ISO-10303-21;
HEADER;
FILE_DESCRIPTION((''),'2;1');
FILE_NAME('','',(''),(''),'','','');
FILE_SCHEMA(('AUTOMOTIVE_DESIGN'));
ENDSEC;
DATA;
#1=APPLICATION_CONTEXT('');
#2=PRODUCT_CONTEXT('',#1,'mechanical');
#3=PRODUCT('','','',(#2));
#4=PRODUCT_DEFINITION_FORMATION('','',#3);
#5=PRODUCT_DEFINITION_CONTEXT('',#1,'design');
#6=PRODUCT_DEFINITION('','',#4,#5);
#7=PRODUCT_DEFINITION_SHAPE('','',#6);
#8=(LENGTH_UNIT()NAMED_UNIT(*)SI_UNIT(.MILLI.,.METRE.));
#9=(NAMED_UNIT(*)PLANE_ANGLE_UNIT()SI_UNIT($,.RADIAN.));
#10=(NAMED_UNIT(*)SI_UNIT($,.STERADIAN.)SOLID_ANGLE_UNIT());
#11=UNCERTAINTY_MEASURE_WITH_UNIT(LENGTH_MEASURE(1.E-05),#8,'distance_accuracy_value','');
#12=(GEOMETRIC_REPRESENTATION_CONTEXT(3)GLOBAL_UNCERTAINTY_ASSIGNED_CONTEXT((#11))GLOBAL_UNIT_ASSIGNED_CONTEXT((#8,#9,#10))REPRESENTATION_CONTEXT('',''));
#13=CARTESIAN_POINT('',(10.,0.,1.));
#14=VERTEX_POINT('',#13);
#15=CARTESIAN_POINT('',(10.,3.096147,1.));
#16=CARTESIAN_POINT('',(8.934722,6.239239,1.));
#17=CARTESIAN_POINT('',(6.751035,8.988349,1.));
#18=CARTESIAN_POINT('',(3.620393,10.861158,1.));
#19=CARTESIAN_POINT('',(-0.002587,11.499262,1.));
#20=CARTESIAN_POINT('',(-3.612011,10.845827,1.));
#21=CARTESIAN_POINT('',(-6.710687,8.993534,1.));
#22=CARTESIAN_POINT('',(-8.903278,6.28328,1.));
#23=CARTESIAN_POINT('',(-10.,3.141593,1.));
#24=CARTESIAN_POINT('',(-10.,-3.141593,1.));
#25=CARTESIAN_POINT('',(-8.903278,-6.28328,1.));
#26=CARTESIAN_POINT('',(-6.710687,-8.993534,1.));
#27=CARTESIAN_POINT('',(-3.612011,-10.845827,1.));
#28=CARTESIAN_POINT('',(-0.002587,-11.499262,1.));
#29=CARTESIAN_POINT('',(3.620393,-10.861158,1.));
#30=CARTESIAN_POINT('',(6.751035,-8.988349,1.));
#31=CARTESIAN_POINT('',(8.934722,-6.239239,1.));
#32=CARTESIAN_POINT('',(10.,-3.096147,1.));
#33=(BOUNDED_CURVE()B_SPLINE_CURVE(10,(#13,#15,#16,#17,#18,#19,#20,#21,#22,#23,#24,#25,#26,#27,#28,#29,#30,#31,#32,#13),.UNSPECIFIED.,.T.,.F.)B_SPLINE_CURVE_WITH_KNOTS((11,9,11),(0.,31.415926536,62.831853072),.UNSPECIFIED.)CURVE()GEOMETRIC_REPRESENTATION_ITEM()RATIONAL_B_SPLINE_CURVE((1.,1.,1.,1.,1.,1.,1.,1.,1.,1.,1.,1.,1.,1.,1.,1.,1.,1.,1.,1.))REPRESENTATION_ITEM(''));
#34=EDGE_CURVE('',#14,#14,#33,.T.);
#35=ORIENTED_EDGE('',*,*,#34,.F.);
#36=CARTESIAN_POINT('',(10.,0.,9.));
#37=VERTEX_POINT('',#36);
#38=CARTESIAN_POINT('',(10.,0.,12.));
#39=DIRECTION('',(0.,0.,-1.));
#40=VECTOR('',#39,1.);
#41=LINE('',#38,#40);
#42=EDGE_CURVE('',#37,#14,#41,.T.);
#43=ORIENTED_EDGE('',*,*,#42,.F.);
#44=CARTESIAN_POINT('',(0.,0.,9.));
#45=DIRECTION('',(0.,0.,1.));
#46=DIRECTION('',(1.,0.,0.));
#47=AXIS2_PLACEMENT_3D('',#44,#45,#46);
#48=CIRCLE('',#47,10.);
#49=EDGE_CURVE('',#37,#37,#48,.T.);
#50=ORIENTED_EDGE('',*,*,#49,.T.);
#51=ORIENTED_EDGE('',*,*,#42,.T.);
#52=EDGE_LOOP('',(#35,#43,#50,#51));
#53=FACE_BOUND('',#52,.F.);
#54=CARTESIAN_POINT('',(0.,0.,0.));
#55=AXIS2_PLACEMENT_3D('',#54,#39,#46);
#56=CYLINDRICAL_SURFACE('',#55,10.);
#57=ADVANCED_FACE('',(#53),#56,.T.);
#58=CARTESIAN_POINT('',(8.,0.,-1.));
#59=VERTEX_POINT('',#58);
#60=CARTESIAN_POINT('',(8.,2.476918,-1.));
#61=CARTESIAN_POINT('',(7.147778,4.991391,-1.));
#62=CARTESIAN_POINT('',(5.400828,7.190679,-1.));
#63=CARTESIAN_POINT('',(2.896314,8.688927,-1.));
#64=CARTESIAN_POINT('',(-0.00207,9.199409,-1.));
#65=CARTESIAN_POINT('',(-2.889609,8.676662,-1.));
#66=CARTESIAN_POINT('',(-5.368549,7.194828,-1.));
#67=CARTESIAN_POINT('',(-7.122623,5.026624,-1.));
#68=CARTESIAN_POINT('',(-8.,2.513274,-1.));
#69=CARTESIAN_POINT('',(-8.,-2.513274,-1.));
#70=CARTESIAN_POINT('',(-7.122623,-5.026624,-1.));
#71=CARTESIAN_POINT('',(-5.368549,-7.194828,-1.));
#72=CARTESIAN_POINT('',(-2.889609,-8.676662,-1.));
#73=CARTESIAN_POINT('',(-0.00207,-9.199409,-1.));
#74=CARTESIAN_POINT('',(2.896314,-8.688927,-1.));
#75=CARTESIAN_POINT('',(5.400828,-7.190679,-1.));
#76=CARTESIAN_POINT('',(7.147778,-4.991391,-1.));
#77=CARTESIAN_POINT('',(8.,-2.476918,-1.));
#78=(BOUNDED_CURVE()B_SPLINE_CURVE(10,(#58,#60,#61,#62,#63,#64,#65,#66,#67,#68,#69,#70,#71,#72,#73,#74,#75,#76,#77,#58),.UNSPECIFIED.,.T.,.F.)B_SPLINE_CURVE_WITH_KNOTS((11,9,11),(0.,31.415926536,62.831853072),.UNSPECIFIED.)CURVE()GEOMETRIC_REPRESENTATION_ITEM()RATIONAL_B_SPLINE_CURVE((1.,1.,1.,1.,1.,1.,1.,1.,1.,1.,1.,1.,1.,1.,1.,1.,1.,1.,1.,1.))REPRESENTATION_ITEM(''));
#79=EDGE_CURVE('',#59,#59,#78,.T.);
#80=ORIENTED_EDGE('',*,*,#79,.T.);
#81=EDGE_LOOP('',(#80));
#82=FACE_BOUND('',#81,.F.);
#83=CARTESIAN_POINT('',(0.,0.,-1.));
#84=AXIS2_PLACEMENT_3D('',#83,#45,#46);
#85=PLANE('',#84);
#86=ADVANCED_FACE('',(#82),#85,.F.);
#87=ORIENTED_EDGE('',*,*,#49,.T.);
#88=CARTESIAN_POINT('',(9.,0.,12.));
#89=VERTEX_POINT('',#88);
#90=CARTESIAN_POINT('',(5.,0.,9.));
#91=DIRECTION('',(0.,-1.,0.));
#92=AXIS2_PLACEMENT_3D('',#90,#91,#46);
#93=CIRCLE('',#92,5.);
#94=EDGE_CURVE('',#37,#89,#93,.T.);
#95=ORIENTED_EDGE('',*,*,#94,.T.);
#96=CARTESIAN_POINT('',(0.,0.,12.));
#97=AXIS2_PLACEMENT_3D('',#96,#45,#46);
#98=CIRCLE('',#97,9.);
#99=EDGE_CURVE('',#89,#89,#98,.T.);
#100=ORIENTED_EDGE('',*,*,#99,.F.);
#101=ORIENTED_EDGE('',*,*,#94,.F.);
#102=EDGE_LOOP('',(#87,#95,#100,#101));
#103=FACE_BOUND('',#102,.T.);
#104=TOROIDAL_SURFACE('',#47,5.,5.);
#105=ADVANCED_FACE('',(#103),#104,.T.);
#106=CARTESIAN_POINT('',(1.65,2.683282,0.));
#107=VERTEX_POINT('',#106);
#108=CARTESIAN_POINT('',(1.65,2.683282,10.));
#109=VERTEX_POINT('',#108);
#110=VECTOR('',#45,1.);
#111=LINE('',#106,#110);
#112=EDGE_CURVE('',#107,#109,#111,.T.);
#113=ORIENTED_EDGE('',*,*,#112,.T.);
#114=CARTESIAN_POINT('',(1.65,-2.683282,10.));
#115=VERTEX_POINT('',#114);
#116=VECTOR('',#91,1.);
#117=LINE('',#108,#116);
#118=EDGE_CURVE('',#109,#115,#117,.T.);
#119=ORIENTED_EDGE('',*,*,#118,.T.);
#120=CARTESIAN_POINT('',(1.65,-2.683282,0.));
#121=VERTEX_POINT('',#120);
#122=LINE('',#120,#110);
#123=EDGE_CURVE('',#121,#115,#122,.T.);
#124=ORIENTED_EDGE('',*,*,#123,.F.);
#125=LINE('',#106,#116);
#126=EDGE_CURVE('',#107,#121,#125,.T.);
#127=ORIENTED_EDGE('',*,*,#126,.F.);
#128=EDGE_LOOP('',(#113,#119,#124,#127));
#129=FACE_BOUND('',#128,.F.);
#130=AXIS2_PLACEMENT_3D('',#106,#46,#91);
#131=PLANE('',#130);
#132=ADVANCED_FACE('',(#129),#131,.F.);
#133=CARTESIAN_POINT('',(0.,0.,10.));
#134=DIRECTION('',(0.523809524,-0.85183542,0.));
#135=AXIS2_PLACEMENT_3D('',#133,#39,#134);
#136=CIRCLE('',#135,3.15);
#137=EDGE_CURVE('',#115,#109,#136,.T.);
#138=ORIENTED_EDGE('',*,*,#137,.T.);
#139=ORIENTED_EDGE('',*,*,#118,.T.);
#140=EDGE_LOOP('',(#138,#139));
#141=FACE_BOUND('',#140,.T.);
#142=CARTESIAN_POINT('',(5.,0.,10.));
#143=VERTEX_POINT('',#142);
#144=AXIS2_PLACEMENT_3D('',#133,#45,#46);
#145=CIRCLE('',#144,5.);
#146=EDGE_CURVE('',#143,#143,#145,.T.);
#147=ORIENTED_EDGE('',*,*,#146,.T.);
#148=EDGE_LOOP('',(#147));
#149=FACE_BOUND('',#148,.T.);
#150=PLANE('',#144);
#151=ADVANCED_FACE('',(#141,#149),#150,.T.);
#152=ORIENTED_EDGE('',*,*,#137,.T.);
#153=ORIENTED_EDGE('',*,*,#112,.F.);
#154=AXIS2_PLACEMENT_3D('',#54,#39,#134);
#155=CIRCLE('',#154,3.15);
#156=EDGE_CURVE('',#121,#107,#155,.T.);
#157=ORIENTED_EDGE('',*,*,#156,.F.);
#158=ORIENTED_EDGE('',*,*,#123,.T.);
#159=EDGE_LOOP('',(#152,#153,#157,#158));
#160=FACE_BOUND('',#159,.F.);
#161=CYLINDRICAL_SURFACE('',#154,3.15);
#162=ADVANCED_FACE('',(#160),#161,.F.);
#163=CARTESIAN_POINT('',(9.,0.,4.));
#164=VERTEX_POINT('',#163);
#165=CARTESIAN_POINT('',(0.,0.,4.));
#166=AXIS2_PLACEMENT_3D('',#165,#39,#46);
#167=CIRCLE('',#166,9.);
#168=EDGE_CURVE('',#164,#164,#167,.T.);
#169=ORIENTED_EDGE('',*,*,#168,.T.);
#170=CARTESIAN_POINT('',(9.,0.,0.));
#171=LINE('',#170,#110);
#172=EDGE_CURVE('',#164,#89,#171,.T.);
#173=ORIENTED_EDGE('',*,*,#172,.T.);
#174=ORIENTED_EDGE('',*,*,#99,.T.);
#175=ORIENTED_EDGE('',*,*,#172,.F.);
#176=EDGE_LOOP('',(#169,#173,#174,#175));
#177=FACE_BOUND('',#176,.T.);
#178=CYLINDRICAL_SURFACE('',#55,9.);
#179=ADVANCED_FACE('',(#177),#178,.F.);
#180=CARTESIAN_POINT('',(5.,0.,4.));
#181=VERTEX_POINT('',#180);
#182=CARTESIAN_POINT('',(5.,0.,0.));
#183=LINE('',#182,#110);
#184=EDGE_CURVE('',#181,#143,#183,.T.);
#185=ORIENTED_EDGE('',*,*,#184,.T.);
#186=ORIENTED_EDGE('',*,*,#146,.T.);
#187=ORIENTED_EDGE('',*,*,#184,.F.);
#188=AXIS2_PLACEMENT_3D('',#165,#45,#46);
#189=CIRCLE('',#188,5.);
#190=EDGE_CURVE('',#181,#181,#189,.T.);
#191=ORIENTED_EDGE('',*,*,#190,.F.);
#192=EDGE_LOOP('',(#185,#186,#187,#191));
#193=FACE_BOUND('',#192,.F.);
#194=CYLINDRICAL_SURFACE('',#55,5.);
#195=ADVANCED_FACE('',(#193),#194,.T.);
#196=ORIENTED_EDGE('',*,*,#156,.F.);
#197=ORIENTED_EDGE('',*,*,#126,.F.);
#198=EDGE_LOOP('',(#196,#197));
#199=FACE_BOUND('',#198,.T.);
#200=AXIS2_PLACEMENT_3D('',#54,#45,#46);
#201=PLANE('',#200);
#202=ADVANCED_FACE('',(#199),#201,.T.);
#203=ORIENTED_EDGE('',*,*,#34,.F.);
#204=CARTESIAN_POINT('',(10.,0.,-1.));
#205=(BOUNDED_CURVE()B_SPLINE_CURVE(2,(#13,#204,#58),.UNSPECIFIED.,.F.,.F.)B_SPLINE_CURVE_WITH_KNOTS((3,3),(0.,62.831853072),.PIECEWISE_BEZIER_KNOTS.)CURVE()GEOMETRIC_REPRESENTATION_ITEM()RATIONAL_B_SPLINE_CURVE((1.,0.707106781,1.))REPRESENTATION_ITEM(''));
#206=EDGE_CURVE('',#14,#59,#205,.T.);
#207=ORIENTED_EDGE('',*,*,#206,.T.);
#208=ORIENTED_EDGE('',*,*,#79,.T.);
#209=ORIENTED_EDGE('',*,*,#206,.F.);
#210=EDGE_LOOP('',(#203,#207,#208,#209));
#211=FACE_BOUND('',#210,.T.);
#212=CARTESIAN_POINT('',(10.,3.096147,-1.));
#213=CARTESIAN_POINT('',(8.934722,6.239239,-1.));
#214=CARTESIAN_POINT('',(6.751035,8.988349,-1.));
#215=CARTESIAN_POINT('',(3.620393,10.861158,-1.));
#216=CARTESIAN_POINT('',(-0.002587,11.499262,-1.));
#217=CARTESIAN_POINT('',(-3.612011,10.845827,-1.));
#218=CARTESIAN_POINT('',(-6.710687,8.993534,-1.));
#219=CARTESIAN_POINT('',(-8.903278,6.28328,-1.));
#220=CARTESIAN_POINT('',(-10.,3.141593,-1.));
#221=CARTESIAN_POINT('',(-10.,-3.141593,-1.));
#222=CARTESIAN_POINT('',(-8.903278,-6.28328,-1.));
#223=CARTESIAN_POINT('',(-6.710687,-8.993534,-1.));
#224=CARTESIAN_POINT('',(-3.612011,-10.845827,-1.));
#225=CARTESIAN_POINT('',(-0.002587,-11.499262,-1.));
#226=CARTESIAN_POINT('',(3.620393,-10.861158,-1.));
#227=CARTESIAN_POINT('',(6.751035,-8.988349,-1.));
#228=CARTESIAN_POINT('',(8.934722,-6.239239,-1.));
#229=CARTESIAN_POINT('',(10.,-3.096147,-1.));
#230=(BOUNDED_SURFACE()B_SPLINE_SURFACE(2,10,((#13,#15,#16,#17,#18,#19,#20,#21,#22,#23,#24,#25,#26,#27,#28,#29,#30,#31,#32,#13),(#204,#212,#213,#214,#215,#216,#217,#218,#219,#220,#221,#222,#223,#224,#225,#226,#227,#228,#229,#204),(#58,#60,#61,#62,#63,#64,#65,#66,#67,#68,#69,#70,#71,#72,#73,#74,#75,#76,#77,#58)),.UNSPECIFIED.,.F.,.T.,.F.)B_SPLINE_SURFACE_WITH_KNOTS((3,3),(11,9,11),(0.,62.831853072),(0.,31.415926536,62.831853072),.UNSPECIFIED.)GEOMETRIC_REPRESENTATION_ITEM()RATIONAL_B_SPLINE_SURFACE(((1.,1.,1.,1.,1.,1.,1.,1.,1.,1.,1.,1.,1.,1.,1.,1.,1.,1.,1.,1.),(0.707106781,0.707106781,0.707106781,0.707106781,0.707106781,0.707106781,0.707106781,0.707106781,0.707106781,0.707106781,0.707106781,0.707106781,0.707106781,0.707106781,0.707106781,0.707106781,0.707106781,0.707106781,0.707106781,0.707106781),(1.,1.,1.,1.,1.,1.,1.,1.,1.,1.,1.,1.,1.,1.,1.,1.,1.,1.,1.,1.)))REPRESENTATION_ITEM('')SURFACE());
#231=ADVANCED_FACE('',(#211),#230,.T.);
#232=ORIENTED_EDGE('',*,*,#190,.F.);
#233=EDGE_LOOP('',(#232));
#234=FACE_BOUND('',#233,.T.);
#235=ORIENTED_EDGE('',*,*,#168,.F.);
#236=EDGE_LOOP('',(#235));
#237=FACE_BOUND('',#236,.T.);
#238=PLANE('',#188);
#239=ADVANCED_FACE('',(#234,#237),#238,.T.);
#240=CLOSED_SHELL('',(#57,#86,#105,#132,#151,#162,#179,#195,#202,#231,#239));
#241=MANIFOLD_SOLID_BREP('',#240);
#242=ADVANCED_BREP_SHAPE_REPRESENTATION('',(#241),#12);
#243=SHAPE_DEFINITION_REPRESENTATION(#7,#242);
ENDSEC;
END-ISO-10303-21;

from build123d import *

# Parameters (mm, degrees)
F0_R     = 10
F0_R_2   = 5
F1_DEPTH = 4
F2_R     = 10
F2_R_2   = 9
F3_DEPTH = 12
F5_R     = 10
F6_DEPTH = 1
F7_R     = 2
F8_DEPTH = 10


# Not quite as in the source:
# - a fillet or chamfer that OpenCascade refuses, or shapes differently, is made with other operations: its cross-section is extruded or revolved along the edge and cut away or added


with BuildPart() as f1:
    # F0 (on Top) → F1 (new body)
    with BuildSketch(Plane.XY):
        Circle(F0_R)
        Circle(F0_R_2, mode=Mode.SUBTRACT)
    extrude(amount=F1_DEPTH)

    # F2 (on Top) → F3 (join)
    with BuildSketch(Plane.XY):
        Circle(F2_R)
        Circle(F2_R_2, mode=Mode.SUBTRACT)
    extrude(amount=F3_DEPTH)

    # F4: fillet of radius 5 on 1 edges, made by hand

    # F4_s1 → F4_t2 (revolve, cut)
    with BuildSketch(Plane.XZ):
        with BuildLine():
            ThreePointArc((10, 9), (9.7434164903, 10.5811388301), (9, 12))
            Line((9, 12), (10, 12))
            Line((10, 12), (10, 9))
        make_face()
    revolve(axis=Axis((0, 0, 12), (0, 0, 1)), mode=Mode.SUBTRACT)

    # F5 (on face) → F6 (join)
    with BuildSketch(Plane.XY):
        Circle(F5_R)
    extrude(amount=-F6_DEPTH)

    # F7
    f7_edges = [f1.edges().sort_by_distance(p)[0] for p in [
        (-10, 0, -1),
    ]]
    fillet(f7_edges, radius=F7_R)

    # F0 (on Top) → F8 (join)
    with BuildSketch(Plane.XY):
        Circle(F0_R_2)
        with BuildLine():
            ThreePointArc((1.65, -2.683281573), (-3.15, 0), (1.65, 2.683281573))
            Line((1.65, 2.683281573), (1.65, -2.683281573))
        make_face(mode=Mode.SUBTRACT)
    extrude(amount=F8_DEPTH)


solid = f1.part
